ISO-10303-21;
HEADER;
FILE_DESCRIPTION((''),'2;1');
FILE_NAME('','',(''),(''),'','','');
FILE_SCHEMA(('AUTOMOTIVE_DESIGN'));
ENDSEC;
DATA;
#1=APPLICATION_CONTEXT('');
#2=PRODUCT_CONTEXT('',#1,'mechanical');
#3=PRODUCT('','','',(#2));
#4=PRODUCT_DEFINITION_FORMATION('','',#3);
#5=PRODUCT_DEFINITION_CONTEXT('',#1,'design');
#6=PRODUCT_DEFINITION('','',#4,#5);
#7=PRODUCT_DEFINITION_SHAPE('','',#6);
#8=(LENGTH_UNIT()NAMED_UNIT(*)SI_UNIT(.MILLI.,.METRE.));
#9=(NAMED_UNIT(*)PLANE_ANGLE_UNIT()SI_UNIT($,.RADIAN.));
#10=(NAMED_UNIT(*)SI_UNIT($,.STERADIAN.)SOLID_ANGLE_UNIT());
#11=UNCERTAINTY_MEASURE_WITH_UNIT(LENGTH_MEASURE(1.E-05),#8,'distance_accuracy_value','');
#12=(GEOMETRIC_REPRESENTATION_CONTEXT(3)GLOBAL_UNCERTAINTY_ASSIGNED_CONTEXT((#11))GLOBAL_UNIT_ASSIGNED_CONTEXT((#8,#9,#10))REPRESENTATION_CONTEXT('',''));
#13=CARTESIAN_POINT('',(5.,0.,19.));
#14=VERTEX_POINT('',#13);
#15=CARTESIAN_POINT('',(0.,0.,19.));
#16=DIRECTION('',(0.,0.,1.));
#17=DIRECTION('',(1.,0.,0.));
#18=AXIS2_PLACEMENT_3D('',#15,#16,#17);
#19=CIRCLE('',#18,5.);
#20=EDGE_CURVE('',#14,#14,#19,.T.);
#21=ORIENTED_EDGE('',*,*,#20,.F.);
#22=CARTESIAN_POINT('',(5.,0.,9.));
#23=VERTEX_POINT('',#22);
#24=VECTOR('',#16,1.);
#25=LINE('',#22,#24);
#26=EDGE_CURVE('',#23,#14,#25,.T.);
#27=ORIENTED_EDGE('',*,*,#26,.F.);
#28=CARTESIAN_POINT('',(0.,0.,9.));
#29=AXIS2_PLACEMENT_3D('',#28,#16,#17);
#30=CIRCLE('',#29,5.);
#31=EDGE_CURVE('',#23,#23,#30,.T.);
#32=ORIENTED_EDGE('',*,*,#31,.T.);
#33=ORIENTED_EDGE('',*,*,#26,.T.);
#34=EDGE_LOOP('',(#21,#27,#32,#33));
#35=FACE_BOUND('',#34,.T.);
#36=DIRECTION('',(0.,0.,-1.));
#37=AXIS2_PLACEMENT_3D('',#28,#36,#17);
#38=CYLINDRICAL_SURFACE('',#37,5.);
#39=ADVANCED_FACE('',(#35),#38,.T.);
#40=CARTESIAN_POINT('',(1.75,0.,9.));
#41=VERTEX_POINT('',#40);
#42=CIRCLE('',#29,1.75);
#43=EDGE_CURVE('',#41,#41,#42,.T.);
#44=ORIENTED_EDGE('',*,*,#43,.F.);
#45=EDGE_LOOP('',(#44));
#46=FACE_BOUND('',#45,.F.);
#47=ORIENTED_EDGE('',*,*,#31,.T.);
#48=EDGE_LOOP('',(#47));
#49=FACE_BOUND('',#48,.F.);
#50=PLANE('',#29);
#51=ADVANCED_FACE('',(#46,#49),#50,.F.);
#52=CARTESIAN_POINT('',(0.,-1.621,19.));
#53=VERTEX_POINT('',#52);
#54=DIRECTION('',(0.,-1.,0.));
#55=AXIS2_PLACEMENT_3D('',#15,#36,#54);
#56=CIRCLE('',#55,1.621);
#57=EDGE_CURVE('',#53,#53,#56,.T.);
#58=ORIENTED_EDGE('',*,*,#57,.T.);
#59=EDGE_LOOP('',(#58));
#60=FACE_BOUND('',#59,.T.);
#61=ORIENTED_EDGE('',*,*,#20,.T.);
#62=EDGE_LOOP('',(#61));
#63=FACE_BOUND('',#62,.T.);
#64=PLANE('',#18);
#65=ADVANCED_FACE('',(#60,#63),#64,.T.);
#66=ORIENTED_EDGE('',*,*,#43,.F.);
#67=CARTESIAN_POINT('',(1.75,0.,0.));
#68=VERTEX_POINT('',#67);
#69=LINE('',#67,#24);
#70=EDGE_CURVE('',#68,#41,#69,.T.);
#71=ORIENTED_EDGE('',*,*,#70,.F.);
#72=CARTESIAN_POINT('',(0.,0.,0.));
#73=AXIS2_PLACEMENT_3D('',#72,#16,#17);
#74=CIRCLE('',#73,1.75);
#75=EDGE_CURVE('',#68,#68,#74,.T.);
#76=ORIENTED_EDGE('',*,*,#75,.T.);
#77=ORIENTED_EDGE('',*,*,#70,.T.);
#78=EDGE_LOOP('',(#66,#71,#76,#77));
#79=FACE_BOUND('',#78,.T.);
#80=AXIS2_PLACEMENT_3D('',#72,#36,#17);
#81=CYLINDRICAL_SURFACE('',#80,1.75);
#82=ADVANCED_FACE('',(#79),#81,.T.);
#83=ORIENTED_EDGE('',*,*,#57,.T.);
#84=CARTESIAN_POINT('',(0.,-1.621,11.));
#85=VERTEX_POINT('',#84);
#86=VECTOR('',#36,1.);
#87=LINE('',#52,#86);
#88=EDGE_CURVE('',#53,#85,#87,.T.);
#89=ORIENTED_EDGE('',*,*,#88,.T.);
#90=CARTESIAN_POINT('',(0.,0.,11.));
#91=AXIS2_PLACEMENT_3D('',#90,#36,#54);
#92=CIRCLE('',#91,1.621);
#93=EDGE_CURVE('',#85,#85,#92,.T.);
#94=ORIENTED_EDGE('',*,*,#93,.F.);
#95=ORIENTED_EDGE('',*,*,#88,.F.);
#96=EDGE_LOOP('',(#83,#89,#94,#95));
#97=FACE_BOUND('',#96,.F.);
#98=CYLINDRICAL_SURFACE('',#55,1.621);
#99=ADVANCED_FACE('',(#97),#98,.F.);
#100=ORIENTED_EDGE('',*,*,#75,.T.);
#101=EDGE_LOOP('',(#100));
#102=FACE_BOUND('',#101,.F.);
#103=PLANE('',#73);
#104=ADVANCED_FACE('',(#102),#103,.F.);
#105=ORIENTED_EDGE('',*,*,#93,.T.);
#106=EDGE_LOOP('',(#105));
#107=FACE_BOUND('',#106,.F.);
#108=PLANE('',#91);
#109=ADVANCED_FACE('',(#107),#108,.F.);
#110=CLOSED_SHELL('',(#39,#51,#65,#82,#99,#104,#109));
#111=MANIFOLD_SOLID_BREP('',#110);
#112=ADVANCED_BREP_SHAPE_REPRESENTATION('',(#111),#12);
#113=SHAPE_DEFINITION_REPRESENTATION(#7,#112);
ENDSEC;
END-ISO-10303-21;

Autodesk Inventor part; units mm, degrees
ref_plane "YZ Plane" through (0, 0, 0) normal (1, 0, 0) x (0, 1, 0)
ref_plane "XZ Plane" through (0, 0, 0) normal (0, 1, 0) x (-1, 0, 0)
ref_plane "XY Plane" through (0, 0, 0) normal (0, 0, 1) x (1, 0, 0)
sketch "Sketch7" plane through (0, 0, 0) normal (0, 0, 1) x (1, 0, 0)
  circle A0 centre (0, 0) radius 1.75
  dimension "d19" = 3.5
extrude "Extrusion6" add sketch "Sketch7" along normal blind 9
sketch "Sketch8" plane through (0, 0, 9) normal (0, 0, 1) x (1, 0, 0)
  circle A0 centre (0, 0) radius 5
  dimension "d22" = 10
extrude "Extrusion7" add sketch "Sketch8" along normal blind 10
sketch "Sketch9" plane through (0, 0, 19) normal (0, 0, 1) x (1, 0, 0)
  point P0 (0, 0)
  point P1 (0, 0)
hole "Hole1" at (0, 0, 19) direction (0, 0, -1) diameter 3.242 depth 8 thread size "M4x0.7" class "6H" standard "ANSI Metric M Profile"
properties part number "Elbow_Parallel_Rod_V1"
